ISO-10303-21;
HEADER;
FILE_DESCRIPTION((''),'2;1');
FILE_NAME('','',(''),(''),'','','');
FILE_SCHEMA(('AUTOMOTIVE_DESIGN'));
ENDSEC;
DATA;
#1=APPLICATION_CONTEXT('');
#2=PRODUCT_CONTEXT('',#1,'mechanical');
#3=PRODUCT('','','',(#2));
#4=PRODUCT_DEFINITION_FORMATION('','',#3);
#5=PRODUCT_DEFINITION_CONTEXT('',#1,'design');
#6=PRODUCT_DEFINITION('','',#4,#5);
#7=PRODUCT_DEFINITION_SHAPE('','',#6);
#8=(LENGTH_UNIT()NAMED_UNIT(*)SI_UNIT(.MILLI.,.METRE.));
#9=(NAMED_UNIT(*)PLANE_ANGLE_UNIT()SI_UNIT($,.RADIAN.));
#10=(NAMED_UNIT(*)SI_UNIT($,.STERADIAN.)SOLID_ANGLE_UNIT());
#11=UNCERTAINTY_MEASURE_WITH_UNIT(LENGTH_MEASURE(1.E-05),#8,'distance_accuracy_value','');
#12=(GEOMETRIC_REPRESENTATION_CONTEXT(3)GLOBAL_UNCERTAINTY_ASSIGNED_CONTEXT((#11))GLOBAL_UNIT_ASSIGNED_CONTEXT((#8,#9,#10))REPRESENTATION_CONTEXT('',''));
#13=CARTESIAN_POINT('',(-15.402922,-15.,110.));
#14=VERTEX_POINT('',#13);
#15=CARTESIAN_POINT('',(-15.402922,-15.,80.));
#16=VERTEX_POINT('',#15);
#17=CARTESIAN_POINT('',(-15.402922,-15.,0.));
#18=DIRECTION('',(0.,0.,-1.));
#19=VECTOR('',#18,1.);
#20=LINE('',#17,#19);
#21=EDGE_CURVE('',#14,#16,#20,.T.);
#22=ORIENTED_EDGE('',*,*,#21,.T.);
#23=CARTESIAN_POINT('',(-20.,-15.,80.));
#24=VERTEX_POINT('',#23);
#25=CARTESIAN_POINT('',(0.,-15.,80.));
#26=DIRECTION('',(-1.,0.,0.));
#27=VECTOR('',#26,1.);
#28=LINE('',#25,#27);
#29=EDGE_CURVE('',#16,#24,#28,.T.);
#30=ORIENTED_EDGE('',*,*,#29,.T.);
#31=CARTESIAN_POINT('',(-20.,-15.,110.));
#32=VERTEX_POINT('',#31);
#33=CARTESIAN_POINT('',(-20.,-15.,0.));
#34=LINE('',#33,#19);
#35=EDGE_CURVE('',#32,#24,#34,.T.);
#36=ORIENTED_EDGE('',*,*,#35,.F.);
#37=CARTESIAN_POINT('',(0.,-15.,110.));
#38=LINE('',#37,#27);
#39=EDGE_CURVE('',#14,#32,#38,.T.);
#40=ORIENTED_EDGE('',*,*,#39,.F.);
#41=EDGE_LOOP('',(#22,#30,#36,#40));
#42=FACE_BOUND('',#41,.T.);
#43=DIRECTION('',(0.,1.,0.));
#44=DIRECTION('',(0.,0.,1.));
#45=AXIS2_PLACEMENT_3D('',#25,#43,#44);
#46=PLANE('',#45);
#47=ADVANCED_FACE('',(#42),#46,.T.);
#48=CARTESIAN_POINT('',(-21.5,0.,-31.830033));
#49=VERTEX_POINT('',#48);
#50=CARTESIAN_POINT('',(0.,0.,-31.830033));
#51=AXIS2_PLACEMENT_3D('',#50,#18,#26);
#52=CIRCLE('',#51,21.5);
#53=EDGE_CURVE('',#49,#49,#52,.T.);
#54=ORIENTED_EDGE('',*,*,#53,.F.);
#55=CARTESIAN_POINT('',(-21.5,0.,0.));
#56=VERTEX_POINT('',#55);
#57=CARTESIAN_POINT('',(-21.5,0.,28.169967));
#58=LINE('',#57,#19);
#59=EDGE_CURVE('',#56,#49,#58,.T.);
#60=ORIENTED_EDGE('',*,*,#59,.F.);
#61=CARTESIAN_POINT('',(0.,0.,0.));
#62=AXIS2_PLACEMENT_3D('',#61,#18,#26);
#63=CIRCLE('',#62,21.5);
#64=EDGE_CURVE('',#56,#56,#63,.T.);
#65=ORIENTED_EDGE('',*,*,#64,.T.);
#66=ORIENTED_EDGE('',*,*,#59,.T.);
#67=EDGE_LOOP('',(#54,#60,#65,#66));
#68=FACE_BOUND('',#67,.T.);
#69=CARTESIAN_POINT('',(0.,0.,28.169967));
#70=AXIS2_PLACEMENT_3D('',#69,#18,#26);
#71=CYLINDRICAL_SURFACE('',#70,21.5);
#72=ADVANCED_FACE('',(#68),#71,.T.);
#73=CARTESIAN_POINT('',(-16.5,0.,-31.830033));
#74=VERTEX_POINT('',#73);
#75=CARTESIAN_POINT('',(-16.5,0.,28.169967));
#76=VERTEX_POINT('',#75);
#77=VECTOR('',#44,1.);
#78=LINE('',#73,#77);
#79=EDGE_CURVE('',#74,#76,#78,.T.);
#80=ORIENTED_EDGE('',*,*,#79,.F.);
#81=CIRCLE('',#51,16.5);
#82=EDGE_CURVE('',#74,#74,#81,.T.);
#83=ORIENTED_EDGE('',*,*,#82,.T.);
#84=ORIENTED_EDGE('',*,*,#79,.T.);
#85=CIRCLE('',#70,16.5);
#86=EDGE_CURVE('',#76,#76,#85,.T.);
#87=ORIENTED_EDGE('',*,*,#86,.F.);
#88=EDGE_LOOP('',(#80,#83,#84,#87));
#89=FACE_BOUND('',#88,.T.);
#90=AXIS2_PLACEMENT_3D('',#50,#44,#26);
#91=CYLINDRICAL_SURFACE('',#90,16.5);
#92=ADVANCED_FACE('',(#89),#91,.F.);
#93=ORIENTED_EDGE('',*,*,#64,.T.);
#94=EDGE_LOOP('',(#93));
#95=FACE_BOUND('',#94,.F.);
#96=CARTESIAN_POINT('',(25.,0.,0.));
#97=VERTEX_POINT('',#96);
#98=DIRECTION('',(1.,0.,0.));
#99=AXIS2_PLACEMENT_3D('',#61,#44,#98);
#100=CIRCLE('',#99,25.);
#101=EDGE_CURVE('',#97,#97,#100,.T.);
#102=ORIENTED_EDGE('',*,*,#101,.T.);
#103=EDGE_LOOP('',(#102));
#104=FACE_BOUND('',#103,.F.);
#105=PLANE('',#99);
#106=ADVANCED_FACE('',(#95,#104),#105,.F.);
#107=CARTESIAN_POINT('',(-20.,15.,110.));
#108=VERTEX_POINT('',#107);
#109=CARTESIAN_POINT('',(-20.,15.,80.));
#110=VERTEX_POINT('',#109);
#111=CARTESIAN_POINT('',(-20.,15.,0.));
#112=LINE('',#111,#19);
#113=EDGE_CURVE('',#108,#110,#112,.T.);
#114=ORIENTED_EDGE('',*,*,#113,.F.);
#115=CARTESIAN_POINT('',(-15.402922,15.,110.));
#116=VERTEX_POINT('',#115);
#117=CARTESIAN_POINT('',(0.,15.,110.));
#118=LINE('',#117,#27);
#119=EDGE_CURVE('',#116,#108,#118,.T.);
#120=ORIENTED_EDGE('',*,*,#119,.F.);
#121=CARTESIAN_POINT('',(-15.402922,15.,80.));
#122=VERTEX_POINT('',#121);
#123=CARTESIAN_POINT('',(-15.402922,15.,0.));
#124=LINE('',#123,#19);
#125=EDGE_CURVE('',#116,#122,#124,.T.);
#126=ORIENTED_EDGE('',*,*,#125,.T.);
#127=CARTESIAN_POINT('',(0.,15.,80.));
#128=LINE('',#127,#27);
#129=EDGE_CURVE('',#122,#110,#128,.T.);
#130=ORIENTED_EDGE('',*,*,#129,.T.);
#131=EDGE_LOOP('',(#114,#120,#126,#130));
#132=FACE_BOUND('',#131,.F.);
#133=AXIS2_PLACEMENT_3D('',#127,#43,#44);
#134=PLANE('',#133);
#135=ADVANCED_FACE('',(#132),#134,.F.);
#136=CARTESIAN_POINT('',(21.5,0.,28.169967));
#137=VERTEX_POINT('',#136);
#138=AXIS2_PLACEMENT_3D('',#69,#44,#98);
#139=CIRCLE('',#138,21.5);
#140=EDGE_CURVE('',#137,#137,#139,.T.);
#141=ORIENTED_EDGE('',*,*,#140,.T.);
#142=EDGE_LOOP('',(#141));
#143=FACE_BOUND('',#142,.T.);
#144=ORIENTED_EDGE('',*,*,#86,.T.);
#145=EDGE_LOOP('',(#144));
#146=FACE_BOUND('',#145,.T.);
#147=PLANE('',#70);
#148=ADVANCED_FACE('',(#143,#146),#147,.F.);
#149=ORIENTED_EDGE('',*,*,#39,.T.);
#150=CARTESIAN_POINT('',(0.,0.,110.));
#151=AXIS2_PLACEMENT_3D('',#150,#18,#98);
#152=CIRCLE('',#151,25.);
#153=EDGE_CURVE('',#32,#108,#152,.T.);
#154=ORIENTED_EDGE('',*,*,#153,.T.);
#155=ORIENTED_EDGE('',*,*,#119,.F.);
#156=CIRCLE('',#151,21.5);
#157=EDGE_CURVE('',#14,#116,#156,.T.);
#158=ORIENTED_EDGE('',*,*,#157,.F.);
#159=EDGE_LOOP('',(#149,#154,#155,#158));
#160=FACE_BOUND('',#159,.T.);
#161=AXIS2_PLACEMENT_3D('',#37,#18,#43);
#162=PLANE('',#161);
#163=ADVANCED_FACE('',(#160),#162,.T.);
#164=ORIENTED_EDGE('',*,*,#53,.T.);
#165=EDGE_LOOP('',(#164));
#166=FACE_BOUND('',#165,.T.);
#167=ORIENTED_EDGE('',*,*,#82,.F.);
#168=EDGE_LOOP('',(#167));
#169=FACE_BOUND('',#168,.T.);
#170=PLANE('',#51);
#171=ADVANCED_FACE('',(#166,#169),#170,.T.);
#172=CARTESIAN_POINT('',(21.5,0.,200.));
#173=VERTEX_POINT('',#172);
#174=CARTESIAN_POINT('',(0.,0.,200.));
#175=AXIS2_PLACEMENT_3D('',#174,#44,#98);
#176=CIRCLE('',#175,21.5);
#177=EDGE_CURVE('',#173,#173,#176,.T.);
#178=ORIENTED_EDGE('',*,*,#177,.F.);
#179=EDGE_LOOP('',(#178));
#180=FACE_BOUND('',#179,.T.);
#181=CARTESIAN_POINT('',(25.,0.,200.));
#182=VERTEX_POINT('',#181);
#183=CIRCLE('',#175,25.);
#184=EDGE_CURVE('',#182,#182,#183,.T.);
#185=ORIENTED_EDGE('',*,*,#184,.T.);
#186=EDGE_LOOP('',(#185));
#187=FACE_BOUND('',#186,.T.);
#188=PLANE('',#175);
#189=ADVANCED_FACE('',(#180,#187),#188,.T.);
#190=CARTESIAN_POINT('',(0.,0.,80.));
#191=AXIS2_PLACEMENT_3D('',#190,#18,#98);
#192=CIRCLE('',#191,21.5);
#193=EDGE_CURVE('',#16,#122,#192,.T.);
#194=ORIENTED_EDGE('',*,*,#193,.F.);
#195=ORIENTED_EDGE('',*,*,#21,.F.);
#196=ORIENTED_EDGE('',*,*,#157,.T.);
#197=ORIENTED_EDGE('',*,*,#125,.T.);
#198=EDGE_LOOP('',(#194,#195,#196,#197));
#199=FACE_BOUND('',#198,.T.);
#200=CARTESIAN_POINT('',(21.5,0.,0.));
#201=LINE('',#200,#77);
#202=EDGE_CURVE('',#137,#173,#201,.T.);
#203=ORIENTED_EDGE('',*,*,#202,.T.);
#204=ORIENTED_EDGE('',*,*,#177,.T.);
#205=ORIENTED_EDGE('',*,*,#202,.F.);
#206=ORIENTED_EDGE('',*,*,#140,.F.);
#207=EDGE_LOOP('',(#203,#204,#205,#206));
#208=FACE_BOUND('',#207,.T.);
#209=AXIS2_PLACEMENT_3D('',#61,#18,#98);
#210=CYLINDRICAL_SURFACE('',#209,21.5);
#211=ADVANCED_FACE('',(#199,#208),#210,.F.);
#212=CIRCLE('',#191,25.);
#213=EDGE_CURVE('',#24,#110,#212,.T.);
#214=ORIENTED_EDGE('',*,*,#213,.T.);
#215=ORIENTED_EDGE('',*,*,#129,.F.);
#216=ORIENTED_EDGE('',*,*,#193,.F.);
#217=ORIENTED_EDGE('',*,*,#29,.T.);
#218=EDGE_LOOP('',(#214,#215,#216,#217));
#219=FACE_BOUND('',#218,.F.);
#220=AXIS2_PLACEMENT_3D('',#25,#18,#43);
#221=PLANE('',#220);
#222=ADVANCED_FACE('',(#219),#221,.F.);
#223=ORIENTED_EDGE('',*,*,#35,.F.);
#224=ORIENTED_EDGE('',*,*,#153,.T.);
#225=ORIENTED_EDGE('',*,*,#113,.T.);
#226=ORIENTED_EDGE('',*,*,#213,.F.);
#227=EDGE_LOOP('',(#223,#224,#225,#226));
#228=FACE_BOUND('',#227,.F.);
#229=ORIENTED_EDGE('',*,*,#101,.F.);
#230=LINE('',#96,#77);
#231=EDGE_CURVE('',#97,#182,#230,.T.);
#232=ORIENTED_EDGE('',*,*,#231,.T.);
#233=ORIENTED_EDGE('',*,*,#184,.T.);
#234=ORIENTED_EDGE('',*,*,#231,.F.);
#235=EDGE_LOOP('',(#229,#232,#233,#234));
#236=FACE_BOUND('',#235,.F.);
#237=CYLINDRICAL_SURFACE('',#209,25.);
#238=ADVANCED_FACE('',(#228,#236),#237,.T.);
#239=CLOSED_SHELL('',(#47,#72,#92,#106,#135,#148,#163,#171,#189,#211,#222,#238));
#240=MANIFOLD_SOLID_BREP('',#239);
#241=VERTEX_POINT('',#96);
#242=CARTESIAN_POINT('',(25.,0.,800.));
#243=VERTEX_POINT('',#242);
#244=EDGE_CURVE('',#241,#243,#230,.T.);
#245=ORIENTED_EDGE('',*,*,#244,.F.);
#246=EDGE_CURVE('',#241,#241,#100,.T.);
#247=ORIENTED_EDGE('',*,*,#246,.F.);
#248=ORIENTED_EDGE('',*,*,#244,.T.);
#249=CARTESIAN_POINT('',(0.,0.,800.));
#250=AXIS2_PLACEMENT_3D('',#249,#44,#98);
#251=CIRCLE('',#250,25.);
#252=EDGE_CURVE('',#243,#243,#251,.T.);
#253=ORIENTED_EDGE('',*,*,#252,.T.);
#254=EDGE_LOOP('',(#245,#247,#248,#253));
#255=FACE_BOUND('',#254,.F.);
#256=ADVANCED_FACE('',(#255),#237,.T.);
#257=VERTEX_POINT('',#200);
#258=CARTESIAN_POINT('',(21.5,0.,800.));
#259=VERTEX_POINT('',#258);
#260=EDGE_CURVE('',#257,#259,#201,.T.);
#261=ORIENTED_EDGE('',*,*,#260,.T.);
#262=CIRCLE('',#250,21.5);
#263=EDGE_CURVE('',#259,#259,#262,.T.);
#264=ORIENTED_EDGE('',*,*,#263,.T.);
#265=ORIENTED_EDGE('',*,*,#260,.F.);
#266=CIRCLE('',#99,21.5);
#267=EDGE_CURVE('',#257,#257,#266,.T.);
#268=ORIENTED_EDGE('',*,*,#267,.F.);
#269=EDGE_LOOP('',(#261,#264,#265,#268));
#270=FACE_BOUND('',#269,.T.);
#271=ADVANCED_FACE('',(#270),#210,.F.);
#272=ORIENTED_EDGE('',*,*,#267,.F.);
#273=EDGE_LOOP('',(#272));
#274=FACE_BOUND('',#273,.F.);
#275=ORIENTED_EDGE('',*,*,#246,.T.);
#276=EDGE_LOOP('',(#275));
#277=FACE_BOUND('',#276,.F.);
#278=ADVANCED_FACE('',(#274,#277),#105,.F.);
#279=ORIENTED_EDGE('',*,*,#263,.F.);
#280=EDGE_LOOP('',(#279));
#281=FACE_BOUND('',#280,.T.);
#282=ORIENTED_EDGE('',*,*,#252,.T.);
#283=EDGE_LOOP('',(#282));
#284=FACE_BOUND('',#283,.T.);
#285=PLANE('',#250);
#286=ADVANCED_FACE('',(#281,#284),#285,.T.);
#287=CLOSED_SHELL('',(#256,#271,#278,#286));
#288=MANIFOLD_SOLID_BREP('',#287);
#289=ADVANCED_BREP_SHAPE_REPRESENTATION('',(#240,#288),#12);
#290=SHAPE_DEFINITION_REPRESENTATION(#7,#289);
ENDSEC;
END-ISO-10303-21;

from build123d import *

# Parameters (mm, degrees)
F0_R     = 25
F0_R_2   = 21.5
F1_DEPTH = 800
F2_DEPTH = 200
F3_W     = 30
F3_H     = 30
F4_DEPTH = 25.001


with BuildPart() as f1:
    # F0 (on Top) → F1 (new body)
    with BuildSketch(Plane.XY):
        Circle(F0_R)
        Circle(F0_R_2, mode=Mode.SUBTRACT)
    extrude(amount=F1_DEPTH)


with BuildPart() as f2:
    # F0 (on Top) → F2 (new body)
    with BuildSketch(Plane.XY):
        Circle(F0_R)
        Circle(F0_R_2, mode=Mode.SUBTRACT)
    extrude(amount=F2_DEPTH)

    # F3 (on Right) → F4 (cut, through all)
    with BuildSketch(Plane.YZ):
        with Locations((0, 95)):
            Rectangle(F3_W, F3_H)
    extrude(amount=-F4_DEPTH, mode=Mode.SUBTRACT)

    # F5 (on Front) → F6 (revolve)
    with BuildSketch(Plane.XZ):
        Polygon((-16.5, -31.8300328033), (-16.5, 0), (-16.5, 28.1699671967), (-21.5, 28.1699671967), (-21.5, -31.8300328033), align=None)
    revolve(axis=Axis((0, 0, -0.3124903888), (0, 0, -1)))


solid = Compound([f1.part, f2.part])
